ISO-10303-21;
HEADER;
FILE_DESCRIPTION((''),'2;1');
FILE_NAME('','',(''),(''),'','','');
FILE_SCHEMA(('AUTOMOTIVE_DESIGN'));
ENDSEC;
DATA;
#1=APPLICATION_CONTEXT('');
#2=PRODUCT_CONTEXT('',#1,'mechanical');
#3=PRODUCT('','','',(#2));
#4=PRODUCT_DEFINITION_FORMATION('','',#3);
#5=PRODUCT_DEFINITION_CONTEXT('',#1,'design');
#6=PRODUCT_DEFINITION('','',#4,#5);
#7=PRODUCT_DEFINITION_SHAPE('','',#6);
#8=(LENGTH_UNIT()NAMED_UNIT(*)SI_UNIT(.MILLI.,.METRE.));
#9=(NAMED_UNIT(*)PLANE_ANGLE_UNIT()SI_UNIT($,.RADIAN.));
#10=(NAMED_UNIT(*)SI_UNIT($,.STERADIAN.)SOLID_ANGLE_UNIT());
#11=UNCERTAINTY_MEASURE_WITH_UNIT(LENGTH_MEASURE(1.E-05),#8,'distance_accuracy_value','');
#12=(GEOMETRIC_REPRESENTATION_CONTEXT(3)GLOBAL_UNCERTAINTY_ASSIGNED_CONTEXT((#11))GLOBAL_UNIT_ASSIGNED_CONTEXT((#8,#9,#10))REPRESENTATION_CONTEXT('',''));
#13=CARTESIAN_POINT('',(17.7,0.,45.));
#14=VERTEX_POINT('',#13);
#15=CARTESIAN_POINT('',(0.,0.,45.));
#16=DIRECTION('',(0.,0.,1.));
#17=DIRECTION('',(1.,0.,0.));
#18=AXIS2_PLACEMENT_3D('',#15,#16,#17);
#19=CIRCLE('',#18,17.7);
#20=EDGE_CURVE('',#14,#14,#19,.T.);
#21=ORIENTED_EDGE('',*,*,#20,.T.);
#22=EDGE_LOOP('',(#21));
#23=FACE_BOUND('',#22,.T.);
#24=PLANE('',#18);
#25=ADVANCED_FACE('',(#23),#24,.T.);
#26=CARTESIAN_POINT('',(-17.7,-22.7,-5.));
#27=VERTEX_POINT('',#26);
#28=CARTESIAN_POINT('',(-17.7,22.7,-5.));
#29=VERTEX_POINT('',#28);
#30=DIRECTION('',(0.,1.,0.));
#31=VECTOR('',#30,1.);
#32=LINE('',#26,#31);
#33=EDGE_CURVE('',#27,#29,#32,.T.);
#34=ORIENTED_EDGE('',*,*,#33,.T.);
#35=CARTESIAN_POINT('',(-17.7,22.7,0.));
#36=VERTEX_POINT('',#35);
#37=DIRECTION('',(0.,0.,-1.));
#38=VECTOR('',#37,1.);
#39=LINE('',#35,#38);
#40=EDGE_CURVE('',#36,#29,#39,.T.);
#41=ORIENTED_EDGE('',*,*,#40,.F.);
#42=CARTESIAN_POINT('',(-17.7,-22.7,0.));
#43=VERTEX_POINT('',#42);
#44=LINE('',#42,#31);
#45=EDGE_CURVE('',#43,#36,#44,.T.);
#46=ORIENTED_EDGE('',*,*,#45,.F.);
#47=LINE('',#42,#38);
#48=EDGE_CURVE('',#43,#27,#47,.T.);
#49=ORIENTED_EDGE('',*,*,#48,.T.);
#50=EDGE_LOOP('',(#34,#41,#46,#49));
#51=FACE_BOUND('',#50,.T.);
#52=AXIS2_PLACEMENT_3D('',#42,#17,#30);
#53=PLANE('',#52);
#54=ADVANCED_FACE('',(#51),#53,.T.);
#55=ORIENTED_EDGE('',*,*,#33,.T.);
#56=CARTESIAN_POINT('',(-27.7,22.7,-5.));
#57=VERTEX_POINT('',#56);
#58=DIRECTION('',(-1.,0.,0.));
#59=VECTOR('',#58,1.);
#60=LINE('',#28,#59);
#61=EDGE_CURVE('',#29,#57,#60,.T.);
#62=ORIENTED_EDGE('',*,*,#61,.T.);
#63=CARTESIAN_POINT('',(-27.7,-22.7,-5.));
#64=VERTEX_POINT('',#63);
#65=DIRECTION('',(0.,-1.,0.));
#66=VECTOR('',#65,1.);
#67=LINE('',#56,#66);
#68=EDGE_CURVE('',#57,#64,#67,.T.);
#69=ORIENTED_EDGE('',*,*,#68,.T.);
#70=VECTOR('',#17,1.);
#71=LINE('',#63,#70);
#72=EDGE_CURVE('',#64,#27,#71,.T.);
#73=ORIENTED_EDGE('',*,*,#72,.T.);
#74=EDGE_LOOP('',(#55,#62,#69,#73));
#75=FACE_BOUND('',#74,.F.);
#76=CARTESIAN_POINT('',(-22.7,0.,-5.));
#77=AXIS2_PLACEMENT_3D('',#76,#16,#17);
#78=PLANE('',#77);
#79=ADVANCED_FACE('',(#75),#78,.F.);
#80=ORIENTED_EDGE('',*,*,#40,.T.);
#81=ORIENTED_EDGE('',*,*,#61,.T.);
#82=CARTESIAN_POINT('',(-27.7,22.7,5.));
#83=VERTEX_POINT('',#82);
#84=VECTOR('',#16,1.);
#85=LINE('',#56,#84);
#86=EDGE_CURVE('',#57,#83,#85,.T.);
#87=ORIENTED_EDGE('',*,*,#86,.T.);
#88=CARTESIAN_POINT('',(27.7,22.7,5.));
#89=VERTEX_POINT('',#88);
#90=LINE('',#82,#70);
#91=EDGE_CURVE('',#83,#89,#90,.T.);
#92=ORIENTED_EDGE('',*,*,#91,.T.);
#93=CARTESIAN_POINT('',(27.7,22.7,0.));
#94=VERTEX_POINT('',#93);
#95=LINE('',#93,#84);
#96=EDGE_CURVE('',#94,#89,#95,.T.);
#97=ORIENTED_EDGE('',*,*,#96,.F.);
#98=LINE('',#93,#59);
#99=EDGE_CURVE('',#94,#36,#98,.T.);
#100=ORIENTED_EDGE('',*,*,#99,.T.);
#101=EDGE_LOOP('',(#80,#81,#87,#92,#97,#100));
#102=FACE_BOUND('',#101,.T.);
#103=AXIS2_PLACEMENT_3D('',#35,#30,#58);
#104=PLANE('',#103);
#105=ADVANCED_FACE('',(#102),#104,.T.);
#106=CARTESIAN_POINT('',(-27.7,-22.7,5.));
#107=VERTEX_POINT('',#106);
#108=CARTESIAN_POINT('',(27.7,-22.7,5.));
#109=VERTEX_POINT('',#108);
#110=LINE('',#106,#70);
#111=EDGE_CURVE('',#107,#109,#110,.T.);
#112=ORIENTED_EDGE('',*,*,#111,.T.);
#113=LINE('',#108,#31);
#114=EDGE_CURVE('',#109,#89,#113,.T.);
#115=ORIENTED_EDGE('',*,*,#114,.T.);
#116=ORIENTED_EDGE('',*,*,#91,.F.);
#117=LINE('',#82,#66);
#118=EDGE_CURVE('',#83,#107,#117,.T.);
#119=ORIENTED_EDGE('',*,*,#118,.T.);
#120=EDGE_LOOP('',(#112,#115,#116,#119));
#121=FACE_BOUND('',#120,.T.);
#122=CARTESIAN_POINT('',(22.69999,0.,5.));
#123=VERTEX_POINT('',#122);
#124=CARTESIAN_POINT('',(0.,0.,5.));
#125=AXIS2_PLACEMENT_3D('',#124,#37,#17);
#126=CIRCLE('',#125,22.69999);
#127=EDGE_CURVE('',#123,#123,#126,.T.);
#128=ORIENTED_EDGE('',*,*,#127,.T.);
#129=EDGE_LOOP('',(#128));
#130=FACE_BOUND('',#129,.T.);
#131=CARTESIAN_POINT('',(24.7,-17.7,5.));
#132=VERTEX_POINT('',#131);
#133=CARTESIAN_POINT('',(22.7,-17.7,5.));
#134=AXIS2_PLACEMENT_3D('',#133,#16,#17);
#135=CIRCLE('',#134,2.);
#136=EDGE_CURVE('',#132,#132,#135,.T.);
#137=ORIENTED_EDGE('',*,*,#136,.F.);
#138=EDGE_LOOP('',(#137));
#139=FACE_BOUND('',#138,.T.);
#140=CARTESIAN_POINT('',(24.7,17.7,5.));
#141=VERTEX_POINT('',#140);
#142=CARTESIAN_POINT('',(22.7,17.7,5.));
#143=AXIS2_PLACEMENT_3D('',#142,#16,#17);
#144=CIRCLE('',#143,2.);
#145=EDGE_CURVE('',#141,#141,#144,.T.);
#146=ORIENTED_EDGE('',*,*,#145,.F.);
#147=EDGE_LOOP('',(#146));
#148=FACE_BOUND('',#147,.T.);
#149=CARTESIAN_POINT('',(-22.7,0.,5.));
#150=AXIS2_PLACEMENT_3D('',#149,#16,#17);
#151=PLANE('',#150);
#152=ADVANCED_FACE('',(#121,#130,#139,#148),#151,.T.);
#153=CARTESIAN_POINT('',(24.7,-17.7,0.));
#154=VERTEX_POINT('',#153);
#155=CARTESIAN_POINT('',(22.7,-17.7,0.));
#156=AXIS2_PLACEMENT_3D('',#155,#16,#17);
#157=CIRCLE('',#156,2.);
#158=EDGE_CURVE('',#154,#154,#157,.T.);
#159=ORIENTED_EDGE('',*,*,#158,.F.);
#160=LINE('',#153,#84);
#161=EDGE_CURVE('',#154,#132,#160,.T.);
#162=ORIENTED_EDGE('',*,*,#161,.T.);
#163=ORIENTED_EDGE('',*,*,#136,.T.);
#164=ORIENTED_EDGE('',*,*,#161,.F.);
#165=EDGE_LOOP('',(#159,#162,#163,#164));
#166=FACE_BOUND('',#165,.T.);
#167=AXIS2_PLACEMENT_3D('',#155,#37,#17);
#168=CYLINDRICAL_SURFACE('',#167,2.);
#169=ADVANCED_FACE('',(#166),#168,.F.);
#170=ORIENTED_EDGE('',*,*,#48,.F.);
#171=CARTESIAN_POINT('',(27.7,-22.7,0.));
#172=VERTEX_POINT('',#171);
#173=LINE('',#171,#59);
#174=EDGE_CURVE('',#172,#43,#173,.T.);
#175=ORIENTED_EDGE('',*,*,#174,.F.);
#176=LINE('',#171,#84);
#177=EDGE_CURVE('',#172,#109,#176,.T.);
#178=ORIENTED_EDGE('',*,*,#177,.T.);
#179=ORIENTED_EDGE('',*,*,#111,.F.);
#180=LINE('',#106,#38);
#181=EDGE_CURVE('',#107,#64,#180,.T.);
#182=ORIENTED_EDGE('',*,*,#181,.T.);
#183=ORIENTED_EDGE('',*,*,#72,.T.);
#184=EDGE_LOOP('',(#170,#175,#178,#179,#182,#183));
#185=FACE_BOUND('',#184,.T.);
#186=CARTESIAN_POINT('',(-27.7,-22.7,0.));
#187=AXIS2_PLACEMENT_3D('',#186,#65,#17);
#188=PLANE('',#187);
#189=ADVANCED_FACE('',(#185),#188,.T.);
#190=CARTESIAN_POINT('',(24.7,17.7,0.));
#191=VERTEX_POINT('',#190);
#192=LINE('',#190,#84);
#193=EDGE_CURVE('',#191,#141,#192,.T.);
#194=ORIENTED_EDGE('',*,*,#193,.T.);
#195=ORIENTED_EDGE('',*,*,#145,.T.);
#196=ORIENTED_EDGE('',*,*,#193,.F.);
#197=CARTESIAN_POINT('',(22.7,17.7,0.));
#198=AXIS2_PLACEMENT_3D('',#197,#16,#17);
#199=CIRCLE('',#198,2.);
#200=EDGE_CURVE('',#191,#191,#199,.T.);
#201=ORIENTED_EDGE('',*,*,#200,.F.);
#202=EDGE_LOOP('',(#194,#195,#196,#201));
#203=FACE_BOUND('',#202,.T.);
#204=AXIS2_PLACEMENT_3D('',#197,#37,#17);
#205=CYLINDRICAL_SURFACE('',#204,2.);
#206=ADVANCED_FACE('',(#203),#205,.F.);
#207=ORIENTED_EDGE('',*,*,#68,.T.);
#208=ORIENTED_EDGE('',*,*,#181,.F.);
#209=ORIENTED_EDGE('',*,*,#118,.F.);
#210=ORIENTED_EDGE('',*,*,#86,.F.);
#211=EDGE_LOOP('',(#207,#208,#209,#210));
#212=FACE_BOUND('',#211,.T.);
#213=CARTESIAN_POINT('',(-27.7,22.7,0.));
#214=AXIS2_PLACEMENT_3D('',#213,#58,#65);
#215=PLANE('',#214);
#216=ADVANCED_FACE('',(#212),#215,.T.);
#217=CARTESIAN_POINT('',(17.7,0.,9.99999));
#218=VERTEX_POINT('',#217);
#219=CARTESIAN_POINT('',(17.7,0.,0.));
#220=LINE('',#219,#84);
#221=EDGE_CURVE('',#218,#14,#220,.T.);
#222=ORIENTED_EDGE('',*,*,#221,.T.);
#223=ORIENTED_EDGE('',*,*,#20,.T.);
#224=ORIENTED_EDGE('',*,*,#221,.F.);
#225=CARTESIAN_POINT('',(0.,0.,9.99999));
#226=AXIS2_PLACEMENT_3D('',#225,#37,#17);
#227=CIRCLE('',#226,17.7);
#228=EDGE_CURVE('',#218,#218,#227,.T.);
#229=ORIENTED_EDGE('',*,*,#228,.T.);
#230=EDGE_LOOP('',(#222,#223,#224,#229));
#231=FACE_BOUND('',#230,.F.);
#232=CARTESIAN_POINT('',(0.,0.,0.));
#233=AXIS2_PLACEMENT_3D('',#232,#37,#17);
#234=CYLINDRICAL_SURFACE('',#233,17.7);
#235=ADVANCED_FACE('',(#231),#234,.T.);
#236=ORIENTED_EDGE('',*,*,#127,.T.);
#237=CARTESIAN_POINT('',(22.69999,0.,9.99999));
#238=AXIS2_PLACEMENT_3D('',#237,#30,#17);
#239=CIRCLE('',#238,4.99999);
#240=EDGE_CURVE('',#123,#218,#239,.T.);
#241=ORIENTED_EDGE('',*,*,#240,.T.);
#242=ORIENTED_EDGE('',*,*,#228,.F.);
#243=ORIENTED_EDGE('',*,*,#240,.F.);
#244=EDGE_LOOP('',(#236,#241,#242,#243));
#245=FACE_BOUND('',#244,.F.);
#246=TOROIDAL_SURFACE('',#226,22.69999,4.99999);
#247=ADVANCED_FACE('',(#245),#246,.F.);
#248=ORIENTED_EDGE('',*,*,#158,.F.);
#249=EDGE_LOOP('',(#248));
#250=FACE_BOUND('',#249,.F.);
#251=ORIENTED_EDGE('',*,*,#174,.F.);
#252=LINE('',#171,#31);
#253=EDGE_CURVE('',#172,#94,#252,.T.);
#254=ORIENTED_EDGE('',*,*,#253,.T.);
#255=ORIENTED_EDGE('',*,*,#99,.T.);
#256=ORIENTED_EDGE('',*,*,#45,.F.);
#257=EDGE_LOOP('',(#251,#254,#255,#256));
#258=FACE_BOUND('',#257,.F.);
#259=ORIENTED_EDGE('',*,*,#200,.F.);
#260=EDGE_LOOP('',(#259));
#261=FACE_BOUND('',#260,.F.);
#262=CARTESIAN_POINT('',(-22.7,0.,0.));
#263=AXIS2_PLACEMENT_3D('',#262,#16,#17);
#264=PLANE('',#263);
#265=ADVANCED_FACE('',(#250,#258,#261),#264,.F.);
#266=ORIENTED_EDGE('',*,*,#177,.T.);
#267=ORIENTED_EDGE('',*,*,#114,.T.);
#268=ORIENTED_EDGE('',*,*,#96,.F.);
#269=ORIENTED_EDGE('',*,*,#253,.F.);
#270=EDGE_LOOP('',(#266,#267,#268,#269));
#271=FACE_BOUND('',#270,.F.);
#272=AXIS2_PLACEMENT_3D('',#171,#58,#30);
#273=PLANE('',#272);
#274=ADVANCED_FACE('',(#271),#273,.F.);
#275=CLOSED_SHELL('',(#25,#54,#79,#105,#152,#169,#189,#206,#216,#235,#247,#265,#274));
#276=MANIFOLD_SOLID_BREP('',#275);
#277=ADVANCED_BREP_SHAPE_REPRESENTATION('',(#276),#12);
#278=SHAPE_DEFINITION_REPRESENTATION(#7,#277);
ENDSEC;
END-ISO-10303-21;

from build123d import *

# Parameters (mm, degrees)
F0_R     = 2
F1_DEPTH = 5
F2_DEPTH = 45
F3_DEPTH = 5
F4_DEPTH = 5
F5_R     = 4.99999


# Not quite as in the source:
# - a fillet or chamfer is up to 0.001 mm smaller than in the source, because OpenCascade refuses the exact size


with BuildPart() as f1:
    # F0 (on Top) → F1 (new body)
    with BuildSketch(Plane.XY):
        Polygon((-17.7, 22.7), (-17.7, 0), (-17.7, -22.7), (27.7, -22.7), (27.7, 22.7), align=None)
        with Locations((22.7, -17.7)):
            Circle(F0_R, mode=Mode.SUBTRACT)
        with BuildLine():
            ThreePointArc((-17.7, 0), (0, 17.7), (17.7, 0))
            ThreePointArc((17.7, 0), (0, -17.7), (-17.7, 0))
        make_face(mode=Mode.SUBTRACT)
        with Locations((22.7, 17.7)):
            Circle(F0_R, mode=Mode.SUBTRACT)
        with BuildLine():
            ThreePointArc((-17.7, 0), (0, -17.7), (17.7, 0))
            ThreePointArc((17.7, 0), (0, 17.7), (-17.7, 0))
        make_face()
    extrude(amount=F1_DEPTH)

    # F0 (on Top) → F2 (join)
    with BuildSketch(Plane.XY):
        with BuildLine():
            ThreePointArc((-17.7, 0), (0, -17.7), (17.7, 0))
            ThreePointArc((17.7, 0), (0, 17.7), (-17.7, 0))
        make_face()
    extrude(amount=F2_DEPTH)

    # F0 (on Top) → F3 (join, through all)
    with BuildSketch(Plane.XY):
        Polygon((-17.7, -22.7), (-17.7, 0), (-17.7, 22.7), (-27.7, 22.7), (-27.7, -22.7), align=None)
    extrude(amount=F3_DEPTH)

    # F0 (on Top) → F4 (join)
    with BuildSketch(Plane.XY):
        Polygon((-17.7, -22.7), (-17.7, 0), (-17.7, 22.7), (-27.7, 22.7), (-27.7, -22.7), align=None)
    extrude(amount=-F4_DEPTH)

    # F5 (radius 5 in the source; OpenCascade refuses exactly that, so slightly less here)
    f5_edges = [f1.edges().sort_by_distance(p)[0] for p in [
        (-17.7, 0, 5),
    ]]
    fillet(f5_edges, radius=F5_R)


solid = f1.part
